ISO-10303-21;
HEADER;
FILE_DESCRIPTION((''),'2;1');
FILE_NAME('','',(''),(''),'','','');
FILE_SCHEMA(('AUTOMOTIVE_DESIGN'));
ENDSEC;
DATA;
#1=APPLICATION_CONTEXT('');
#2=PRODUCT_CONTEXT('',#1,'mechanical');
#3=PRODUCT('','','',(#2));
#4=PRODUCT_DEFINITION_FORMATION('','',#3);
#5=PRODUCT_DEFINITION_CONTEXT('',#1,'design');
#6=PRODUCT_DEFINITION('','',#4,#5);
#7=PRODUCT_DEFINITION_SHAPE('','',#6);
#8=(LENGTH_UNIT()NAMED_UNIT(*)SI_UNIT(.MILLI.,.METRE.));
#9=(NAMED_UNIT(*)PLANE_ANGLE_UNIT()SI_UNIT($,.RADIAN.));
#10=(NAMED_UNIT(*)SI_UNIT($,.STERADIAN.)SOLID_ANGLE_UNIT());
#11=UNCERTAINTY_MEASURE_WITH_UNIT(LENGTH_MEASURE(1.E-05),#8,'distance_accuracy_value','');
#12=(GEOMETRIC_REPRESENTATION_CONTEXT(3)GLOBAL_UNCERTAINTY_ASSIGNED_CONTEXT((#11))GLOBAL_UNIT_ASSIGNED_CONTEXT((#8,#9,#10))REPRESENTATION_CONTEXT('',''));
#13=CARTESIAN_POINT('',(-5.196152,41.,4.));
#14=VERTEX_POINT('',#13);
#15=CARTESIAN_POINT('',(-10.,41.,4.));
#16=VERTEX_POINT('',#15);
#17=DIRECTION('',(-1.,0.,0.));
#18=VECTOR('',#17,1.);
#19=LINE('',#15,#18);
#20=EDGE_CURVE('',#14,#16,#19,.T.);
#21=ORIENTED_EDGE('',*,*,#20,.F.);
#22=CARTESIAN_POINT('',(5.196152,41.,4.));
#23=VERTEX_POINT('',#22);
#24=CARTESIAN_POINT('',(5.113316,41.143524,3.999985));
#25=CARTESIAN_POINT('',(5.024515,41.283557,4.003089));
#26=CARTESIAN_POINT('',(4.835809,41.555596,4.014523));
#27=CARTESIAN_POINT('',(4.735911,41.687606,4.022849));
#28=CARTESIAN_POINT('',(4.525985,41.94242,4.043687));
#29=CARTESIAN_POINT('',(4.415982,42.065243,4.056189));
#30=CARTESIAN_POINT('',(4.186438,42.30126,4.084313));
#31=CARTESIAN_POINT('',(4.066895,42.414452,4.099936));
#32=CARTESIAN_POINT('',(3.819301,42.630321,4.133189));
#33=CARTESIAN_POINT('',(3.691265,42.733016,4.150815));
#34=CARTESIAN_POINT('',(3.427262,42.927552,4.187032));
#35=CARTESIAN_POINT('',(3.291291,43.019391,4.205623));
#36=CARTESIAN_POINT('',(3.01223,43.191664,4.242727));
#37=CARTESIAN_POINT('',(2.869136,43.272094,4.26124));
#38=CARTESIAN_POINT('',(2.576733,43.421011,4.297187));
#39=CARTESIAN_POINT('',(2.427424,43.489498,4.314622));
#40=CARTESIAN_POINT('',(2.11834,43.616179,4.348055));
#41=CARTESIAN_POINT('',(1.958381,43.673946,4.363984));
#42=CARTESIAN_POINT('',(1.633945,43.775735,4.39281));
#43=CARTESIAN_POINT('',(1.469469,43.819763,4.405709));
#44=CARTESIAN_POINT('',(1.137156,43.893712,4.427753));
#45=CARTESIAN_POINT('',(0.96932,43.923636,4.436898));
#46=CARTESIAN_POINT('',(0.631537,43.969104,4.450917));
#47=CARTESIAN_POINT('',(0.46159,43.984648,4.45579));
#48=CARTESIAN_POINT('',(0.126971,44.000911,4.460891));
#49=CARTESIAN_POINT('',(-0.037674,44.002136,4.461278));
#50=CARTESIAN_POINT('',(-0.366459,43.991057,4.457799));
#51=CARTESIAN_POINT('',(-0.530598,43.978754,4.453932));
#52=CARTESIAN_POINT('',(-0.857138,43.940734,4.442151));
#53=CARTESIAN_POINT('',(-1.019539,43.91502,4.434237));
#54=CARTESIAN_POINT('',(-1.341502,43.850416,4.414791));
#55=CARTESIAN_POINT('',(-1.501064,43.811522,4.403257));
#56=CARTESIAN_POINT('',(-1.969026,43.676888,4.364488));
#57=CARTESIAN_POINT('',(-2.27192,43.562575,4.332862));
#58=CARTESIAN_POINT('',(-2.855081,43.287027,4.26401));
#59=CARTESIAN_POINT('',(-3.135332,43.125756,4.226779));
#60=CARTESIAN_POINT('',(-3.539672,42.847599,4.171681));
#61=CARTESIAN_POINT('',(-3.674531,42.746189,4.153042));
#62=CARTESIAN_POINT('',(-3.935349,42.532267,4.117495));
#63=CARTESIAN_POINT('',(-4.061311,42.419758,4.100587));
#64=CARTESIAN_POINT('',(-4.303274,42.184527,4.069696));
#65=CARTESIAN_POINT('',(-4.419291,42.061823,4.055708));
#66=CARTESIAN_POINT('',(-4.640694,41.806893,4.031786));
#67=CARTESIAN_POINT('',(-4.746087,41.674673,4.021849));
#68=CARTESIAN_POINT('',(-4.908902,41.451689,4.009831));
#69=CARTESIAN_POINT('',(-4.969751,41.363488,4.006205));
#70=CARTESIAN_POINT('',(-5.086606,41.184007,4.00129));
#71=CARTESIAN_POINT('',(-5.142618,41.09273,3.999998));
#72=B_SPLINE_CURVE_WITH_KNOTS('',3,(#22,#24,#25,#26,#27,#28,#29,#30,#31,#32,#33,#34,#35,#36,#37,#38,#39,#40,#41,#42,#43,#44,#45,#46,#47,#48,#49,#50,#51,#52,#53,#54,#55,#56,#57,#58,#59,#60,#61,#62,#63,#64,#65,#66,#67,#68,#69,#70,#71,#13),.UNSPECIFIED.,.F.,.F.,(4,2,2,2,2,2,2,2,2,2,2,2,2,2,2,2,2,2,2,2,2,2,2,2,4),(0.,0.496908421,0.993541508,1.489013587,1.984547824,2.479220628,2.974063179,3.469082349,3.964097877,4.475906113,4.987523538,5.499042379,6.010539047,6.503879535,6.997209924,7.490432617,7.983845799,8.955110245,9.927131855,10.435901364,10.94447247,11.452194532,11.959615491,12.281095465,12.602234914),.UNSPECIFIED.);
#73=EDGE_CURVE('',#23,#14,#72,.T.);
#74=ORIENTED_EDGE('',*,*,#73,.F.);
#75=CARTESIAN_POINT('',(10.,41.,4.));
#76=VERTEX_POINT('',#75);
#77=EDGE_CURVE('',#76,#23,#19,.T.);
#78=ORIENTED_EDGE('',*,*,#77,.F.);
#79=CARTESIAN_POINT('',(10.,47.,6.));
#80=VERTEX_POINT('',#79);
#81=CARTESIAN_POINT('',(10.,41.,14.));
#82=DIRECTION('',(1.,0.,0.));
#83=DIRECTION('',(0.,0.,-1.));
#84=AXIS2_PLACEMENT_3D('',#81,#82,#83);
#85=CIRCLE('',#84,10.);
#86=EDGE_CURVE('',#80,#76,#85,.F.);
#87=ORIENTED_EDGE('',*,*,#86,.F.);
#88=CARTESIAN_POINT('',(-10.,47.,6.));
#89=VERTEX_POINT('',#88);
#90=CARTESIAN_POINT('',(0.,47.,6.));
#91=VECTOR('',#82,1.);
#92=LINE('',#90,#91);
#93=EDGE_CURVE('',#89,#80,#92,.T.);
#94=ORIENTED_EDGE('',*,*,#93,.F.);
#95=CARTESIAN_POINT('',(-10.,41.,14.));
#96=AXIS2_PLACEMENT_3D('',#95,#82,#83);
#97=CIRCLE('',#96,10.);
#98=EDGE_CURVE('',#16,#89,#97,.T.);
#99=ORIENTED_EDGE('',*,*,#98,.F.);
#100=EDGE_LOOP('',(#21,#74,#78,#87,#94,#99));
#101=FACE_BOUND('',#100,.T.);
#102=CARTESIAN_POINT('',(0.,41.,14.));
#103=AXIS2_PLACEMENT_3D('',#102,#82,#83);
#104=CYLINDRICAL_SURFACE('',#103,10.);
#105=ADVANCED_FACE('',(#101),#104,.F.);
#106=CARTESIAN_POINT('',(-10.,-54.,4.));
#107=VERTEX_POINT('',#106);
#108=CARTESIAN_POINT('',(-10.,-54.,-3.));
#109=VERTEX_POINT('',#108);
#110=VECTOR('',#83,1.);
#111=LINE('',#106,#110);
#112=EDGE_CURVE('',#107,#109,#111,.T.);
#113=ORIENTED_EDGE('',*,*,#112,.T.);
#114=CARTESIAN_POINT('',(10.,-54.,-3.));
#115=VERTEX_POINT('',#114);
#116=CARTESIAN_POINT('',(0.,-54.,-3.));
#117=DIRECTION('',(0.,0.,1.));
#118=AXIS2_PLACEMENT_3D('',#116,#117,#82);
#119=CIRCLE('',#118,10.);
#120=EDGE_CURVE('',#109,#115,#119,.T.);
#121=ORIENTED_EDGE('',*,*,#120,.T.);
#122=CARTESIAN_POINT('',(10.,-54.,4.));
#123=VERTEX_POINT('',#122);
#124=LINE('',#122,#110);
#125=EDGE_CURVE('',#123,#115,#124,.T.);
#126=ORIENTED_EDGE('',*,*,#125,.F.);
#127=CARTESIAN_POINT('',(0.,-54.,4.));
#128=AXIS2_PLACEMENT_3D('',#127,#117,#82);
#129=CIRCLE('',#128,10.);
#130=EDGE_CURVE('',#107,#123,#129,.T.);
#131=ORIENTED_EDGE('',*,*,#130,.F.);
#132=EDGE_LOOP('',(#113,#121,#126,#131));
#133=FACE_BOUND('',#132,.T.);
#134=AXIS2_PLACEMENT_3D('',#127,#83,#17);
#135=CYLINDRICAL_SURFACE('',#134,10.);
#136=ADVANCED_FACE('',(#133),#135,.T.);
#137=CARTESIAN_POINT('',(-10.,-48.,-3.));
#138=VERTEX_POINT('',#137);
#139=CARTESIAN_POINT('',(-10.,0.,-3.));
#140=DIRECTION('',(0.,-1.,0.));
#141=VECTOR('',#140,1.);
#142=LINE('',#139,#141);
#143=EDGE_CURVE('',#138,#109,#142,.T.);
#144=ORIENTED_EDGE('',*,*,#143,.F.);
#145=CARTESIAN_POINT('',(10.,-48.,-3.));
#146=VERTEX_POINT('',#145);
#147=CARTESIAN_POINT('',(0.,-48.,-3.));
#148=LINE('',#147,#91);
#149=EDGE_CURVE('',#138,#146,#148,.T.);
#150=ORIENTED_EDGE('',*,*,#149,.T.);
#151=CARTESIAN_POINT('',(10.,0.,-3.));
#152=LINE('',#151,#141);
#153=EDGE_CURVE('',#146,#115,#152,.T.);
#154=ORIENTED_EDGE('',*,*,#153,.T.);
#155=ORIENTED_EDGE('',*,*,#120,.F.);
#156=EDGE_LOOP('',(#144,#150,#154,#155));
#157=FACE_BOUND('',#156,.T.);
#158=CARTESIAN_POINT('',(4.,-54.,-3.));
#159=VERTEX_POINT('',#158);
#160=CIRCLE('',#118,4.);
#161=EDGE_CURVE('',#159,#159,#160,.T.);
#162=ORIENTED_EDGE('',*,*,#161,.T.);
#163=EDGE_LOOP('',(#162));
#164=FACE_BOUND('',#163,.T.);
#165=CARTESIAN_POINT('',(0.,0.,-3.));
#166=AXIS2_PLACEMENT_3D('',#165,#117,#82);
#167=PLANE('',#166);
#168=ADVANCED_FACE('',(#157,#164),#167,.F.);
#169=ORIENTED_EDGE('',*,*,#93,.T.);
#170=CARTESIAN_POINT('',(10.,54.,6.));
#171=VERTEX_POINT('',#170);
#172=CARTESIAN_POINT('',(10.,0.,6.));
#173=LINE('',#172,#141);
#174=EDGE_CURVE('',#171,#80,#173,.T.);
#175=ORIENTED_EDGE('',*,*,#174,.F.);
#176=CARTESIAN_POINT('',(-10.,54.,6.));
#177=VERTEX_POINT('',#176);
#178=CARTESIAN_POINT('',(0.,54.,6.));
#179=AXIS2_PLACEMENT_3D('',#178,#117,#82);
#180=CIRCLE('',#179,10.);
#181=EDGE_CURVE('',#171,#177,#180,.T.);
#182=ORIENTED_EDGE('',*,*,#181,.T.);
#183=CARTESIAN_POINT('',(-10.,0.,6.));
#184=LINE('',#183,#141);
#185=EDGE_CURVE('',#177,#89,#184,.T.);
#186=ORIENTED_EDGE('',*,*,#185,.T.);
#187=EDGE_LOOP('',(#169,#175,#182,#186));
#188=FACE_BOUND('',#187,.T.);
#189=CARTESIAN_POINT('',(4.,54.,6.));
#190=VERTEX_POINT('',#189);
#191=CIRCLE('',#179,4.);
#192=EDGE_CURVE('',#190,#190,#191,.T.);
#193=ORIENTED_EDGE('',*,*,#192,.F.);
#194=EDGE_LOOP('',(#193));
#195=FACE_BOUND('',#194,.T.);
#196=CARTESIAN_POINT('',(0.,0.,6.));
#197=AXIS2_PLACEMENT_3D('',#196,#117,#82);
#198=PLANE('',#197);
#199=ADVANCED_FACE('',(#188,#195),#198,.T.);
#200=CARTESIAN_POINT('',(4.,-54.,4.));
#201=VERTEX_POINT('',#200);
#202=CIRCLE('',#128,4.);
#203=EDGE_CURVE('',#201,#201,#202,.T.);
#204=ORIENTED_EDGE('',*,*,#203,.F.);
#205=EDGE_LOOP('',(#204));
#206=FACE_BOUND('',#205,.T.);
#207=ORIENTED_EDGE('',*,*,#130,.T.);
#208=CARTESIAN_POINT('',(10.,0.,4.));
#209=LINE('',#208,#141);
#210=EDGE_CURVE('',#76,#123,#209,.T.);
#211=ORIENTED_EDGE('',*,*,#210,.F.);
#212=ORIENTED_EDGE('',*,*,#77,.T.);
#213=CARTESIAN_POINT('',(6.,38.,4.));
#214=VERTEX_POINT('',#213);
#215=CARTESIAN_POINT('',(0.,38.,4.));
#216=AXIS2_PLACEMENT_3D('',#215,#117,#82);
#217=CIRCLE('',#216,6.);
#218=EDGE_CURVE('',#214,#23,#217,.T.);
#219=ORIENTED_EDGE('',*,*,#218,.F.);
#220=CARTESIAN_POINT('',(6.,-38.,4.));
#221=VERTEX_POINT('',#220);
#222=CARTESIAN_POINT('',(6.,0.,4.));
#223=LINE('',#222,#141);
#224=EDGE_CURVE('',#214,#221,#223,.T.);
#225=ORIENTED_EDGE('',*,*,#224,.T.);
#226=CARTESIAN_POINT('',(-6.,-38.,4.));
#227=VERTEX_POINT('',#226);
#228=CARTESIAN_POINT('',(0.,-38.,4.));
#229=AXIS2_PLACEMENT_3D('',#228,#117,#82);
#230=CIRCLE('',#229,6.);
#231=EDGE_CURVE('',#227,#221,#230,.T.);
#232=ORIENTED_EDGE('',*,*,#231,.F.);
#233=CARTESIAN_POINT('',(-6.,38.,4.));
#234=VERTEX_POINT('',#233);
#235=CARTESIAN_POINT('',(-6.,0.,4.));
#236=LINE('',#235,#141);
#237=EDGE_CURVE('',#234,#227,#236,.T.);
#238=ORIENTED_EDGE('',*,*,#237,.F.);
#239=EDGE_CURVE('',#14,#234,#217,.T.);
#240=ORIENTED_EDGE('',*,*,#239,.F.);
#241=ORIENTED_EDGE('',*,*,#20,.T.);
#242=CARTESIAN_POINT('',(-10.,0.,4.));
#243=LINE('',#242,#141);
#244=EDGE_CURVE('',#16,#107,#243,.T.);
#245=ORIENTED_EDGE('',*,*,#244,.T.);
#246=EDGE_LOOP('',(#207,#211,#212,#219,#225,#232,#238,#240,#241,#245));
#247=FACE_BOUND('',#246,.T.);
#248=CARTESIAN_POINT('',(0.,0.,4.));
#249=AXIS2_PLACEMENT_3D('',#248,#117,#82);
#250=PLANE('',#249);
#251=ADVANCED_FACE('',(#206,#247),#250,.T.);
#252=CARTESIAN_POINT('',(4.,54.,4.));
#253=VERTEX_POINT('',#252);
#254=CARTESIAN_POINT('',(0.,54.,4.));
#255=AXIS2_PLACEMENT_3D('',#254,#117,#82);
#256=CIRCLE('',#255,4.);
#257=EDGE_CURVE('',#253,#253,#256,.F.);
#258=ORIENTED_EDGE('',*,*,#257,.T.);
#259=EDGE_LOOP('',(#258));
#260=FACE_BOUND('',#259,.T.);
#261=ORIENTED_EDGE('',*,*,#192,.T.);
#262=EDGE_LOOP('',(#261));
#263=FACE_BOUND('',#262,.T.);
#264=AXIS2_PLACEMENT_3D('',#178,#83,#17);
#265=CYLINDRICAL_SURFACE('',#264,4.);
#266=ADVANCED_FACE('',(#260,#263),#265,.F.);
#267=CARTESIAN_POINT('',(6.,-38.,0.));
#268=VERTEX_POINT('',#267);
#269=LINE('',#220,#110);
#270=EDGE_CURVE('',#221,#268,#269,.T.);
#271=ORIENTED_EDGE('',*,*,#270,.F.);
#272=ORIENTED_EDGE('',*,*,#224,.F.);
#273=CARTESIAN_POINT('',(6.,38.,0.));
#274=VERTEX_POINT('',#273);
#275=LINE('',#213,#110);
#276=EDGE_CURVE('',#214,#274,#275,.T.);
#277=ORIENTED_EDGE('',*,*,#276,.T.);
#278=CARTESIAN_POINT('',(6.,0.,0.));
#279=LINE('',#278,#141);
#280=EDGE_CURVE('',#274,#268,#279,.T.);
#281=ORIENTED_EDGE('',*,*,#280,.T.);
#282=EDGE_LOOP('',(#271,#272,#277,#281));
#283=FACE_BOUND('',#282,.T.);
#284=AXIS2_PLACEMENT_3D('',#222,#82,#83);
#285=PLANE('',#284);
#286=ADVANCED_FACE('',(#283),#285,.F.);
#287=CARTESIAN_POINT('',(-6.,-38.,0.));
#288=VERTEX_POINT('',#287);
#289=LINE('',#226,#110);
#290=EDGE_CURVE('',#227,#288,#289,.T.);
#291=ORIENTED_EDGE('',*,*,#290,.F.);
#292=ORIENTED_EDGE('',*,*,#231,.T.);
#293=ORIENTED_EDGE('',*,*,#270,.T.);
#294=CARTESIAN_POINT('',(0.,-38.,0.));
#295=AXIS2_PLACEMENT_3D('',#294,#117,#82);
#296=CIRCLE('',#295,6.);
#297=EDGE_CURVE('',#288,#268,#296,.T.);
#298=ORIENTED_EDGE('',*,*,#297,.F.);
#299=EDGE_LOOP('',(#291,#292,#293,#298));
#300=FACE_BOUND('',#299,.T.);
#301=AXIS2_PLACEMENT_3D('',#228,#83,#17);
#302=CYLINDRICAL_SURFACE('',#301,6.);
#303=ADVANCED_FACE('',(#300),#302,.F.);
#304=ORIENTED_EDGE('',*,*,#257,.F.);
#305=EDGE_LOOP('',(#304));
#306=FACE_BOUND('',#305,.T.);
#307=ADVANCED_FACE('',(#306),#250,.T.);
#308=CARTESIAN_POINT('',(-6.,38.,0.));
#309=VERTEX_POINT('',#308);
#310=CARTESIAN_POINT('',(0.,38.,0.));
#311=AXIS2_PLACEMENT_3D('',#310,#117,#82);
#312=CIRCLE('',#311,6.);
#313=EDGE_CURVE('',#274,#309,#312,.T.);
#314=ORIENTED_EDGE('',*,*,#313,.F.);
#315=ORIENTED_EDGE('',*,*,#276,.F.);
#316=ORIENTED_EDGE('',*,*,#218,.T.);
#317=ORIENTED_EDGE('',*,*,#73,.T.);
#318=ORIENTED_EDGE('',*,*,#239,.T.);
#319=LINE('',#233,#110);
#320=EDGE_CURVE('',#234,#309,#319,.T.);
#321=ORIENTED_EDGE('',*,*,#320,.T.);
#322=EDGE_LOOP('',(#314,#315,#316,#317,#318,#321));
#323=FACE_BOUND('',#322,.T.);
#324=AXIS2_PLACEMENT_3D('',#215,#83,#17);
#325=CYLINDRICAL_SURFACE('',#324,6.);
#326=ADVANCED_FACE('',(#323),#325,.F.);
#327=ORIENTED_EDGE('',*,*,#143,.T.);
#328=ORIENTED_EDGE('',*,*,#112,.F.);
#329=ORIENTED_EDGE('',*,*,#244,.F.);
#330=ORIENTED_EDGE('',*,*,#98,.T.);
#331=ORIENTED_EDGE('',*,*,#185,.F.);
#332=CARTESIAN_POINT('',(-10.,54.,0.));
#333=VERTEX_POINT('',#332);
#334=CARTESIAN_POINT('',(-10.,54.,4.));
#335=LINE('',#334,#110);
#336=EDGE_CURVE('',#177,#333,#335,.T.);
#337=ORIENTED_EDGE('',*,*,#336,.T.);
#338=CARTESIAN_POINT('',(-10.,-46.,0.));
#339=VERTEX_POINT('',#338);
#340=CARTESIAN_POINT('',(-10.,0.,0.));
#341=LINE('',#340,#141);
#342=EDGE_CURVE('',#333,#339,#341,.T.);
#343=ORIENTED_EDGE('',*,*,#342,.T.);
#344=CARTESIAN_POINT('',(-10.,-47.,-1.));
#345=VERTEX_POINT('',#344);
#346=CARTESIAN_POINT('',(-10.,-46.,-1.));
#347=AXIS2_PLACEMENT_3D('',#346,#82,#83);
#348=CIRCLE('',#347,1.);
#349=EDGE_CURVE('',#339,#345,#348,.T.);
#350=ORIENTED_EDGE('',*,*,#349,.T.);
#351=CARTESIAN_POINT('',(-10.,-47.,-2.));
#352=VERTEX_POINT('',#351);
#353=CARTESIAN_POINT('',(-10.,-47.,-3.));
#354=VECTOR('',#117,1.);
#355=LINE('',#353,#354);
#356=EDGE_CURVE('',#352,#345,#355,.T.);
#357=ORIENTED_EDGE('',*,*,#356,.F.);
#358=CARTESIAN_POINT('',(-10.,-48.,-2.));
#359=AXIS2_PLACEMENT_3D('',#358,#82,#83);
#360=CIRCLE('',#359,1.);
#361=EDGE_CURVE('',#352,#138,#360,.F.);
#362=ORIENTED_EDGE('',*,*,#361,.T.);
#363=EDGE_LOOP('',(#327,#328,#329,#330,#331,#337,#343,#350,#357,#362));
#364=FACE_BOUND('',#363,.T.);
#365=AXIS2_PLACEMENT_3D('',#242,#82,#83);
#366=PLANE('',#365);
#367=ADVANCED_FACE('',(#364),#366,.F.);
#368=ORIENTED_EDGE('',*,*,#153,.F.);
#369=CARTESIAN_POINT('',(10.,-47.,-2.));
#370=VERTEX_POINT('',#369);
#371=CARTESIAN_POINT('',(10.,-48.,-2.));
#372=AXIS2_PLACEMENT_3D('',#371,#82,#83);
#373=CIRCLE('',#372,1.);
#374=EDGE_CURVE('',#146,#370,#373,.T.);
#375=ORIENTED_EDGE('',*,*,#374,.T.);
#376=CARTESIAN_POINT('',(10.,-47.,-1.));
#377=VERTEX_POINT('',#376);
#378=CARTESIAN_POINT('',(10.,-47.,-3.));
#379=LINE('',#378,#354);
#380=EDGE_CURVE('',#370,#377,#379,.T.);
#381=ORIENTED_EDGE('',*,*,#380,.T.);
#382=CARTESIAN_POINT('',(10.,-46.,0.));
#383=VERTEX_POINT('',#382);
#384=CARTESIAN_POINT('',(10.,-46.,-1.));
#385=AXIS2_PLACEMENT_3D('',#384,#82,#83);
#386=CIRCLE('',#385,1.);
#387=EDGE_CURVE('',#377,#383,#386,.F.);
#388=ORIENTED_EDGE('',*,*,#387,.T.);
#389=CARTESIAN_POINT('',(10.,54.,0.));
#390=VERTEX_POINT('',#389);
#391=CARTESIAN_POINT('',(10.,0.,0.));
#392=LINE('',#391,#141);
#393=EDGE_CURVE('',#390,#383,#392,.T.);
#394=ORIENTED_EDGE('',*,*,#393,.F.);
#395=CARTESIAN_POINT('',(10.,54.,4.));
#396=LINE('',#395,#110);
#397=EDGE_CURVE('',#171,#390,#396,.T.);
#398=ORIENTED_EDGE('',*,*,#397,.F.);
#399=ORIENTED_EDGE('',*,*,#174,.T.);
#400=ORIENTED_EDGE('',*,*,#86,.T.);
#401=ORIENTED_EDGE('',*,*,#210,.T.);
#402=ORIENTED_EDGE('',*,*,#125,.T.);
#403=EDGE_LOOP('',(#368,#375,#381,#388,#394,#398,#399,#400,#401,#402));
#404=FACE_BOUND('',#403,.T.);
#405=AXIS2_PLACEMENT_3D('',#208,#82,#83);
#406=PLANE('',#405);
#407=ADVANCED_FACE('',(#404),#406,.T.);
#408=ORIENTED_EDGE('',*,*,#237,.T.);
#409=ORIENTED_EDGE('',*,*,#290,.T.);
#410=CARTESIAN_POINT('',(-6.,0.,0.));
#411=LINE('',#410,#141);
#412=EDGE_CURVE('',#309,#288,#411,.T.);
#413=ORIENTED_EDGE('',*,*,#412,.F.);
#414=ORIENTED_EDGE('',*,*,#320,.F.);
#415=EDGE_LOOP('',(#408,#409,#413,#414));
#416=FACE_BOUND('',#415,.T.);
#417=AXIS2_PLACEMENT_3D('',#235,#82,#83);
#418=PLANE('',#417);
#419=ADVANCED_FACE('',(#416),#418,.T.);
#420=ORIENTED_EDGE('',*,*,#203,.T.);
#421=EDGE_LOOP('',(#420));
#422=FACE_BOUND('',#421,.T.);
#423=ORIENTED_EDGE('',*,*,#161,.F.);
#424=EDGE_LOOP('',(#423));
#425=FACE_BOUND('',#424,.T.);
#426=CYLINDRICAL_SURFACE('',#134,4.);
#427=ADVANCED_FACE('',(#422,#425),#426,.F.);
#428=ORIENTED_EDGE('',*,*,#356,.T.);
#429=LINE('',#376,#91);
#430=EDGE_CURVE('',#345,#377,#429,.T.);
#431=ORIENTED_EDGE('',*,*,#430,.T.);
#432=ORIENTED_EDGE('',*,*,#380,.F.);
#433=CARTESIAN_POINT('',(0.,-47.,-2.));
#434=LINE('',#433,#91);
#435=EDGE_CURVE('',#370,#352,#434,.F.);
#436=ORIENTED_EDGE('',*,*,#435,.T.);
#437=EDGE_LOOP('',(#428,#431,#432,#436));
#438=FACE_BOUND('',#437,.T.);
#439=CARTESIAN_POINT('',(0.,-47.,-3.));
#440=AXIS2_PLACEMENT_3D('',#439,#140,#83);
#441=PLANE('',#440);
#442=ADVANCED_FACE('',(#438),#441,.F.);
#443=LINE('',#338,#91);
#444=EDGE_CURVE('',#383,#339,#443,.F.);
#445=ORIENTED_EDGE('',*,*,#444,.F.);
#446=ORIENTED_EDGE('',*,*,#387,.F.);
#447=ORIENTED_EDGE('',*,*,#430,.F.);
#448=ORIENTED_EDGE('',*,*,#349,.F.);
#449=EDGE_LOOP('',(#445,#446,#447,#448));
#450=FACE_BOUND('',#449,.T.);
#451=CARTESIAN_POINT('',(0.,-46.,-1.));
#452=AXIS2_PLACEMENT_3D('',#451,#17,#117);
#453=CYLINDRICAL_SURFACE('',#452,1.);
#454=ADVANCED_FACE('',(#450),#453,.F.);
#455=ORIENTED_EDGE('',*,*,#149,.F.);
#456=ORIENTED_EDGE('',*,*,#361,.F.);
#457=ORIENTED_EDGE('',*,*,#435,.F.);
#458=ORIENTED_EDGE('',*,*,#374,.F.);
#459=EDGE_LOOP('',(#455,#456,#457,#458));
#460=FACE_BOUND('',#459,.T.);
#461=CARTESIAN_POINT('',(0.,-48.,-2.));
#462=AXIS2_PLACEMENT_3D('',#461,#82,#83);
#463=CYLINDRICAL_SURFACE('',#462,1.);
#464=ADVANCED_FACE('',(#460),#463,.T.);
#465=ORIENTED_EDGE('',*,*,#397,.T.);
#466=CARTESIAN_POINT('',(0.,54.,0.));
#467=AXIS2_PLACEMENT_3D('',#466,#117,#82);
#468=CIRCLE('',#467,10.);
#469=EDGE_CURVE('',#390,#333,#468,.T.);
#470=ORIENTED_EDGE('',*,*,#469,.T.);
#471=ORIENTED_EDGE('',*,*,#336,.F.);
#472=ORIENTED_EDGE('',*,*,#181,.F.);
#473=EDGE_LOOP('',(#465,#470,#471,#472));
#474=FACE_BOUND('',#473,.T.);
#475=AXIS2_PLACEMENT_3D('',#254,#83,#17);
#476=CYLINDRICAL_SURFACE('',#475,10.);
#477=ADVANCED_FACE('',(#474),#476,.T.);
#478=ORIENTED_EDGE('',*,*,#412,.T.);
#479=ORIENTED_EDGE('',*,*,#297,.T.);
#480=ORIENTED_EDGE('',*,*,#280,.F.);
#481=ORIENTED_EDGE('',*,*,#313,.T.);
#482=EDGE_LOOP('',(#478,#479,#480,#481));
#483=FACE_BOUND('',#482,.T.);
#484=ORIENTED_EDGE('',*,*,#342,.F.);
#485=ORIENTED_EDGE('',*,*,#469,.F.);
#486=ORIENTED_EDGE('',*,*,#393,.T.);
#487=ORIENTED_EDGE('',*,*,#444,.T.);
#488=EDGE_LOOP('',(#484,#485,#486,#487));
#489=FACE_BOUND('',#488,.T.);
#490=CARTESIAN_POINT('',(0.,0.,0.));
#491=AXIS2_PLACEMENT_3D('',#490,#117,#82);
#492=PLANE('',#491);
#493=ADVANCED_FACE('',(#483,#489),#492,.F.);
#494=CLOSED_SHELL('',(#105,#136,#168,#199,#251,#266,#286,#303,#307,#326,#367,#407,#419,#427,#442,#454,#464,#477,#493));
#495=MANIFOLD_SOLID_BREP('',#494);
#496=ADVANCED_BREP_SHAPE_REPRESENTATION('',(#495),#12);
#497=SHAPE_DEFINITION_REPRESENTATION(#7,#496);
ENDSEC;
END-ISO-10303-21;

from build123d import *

# Parameters (mm, degrees)
CROQUIS1_R              = 4
SALIENTE_EXTRUIR1_DEPTH = 4
SALIENTE_EXTRUIR2_START = -3
CROQUIS1_5_R            = 4
SALIENTE_EXTRUIR2_DEPTH = 3
REDONDEO2_R             = 1
CROQUIS1_6_R            = 4
SALIENTE_EXTRUIR3_DEPTH = 6
REDONDEO1_R             = 10


with BuildPart() as part:
    # Croquis1 → Saliente-Extruir1 (new body)
    with BuildSketch(Plane.XY):
        with BuildLine():
            Line((10, 54), (10, -54))
            ThreePointArc((10, -54), (0, -64), (-10, -54))
            Line((-10, -54), (-10, 54))
            ThreePointArc((-10, 54), (0, 64), (10, 54))
        make_face()
        with Locations((0, -54)):
            Circle(CROQUIS1_R, mode=Mode.SUBTRACT)
        with BuildLine():
            Line((6, 38), (6, -38))
            ThreePointArc((6, -38), (0, -44), (-6, -38))
            Line((-6, -38), (-6, 38))
            ThreePointArc((-6, 38), (0, 44), (6, 38))
        make_face(mode=Mode.SUBTRACT)
    extrude(amount=SALIENTE_EXTRUIR1_DEPTH)

    # Croquis1<5> → Saliente-Extruir2 (add)
    with BuildSketch(Plane.XY.offset(SALIENTE_EXTRUIR2_START)):
        with BuildLine():
            Line((10, -54), (10, -47))
            Line((10, -47), (-10, -47))
            Line((-10, -47), (-10, -54))
            ThreePointArc((-10, -54), (0, -64), (10, -54))
        make_face()
        with Locations((0, -54)):
            Circle(CROQUIS1_5_R, mode=Mode.SUBTRACT)
    extrude(amount=SALIENTE_EXTRUIR2_DEPTH)

    # Redondeo2
    redondeo2_edges = [part.edges().sort_by_distance(p)[0] for p in [
        (0, -47, 0),
        (0, -47, -3),
    ]]
    fillet(redondeo2_edges, radius=REDONDEO2_R)

    # Croquis1<6> → Saliente-Extruir3 (add)
    with BuildSketch(Plane.XY):
        with BuildLine():
            Line((10, 47), (10, 54))
            ThreePointArc((10, 54), (0, 64), (-10, 54))
            Line((-10, 54), (-10, 47))
            Line((-10, 47), (10, 47))
        make_face()
        with Locations((0, 54)):
            Circle(CROQUIS1_6_R, mode=Mode.SUBTRACT)
    extrude(amount=SALIENTE_EXTRUIR3_DEPTH)

    # Redondeo1
    # the kernel refuses this fillet: 10 mm, written as the material it adds along each edge
    with BuildSketch(Plane(origin=(-10, 47, 4), x_dir=(0, 0, 1), z_dir=(1, 0, 0))) as redondeo1_piece_1_section:
        with BuildLine():
            CenterArc((10, 6), REDONDEO1_R, 180, 36.869897646)
            Line((0, 6), (-0.2, 6))
            Line((-0.2, 6), (-0.2, 0))
            Line((-0.2, 0), (0, -0.2))
            ThreePointArc((0, -0.2), (1, -0.2), (1.84, -0.12))
            Line((1.84, -0.12), (2, 0))
        make_face()
    redondeo1_piece_1 = extrude(amount=20, mode=Mode.PRIVATE)
    redondeo1_piece_1 = redondeo1_piece_1 - Plane(origin=(0, 38, 4.484524187), x_dir=(-1, 0, 0), z_dir=(0, 0, -1)) * Cylinder(6, 65, mode=Mode.PRIVATE)
    add(redondeo1_piece_1)


solid = part.part
